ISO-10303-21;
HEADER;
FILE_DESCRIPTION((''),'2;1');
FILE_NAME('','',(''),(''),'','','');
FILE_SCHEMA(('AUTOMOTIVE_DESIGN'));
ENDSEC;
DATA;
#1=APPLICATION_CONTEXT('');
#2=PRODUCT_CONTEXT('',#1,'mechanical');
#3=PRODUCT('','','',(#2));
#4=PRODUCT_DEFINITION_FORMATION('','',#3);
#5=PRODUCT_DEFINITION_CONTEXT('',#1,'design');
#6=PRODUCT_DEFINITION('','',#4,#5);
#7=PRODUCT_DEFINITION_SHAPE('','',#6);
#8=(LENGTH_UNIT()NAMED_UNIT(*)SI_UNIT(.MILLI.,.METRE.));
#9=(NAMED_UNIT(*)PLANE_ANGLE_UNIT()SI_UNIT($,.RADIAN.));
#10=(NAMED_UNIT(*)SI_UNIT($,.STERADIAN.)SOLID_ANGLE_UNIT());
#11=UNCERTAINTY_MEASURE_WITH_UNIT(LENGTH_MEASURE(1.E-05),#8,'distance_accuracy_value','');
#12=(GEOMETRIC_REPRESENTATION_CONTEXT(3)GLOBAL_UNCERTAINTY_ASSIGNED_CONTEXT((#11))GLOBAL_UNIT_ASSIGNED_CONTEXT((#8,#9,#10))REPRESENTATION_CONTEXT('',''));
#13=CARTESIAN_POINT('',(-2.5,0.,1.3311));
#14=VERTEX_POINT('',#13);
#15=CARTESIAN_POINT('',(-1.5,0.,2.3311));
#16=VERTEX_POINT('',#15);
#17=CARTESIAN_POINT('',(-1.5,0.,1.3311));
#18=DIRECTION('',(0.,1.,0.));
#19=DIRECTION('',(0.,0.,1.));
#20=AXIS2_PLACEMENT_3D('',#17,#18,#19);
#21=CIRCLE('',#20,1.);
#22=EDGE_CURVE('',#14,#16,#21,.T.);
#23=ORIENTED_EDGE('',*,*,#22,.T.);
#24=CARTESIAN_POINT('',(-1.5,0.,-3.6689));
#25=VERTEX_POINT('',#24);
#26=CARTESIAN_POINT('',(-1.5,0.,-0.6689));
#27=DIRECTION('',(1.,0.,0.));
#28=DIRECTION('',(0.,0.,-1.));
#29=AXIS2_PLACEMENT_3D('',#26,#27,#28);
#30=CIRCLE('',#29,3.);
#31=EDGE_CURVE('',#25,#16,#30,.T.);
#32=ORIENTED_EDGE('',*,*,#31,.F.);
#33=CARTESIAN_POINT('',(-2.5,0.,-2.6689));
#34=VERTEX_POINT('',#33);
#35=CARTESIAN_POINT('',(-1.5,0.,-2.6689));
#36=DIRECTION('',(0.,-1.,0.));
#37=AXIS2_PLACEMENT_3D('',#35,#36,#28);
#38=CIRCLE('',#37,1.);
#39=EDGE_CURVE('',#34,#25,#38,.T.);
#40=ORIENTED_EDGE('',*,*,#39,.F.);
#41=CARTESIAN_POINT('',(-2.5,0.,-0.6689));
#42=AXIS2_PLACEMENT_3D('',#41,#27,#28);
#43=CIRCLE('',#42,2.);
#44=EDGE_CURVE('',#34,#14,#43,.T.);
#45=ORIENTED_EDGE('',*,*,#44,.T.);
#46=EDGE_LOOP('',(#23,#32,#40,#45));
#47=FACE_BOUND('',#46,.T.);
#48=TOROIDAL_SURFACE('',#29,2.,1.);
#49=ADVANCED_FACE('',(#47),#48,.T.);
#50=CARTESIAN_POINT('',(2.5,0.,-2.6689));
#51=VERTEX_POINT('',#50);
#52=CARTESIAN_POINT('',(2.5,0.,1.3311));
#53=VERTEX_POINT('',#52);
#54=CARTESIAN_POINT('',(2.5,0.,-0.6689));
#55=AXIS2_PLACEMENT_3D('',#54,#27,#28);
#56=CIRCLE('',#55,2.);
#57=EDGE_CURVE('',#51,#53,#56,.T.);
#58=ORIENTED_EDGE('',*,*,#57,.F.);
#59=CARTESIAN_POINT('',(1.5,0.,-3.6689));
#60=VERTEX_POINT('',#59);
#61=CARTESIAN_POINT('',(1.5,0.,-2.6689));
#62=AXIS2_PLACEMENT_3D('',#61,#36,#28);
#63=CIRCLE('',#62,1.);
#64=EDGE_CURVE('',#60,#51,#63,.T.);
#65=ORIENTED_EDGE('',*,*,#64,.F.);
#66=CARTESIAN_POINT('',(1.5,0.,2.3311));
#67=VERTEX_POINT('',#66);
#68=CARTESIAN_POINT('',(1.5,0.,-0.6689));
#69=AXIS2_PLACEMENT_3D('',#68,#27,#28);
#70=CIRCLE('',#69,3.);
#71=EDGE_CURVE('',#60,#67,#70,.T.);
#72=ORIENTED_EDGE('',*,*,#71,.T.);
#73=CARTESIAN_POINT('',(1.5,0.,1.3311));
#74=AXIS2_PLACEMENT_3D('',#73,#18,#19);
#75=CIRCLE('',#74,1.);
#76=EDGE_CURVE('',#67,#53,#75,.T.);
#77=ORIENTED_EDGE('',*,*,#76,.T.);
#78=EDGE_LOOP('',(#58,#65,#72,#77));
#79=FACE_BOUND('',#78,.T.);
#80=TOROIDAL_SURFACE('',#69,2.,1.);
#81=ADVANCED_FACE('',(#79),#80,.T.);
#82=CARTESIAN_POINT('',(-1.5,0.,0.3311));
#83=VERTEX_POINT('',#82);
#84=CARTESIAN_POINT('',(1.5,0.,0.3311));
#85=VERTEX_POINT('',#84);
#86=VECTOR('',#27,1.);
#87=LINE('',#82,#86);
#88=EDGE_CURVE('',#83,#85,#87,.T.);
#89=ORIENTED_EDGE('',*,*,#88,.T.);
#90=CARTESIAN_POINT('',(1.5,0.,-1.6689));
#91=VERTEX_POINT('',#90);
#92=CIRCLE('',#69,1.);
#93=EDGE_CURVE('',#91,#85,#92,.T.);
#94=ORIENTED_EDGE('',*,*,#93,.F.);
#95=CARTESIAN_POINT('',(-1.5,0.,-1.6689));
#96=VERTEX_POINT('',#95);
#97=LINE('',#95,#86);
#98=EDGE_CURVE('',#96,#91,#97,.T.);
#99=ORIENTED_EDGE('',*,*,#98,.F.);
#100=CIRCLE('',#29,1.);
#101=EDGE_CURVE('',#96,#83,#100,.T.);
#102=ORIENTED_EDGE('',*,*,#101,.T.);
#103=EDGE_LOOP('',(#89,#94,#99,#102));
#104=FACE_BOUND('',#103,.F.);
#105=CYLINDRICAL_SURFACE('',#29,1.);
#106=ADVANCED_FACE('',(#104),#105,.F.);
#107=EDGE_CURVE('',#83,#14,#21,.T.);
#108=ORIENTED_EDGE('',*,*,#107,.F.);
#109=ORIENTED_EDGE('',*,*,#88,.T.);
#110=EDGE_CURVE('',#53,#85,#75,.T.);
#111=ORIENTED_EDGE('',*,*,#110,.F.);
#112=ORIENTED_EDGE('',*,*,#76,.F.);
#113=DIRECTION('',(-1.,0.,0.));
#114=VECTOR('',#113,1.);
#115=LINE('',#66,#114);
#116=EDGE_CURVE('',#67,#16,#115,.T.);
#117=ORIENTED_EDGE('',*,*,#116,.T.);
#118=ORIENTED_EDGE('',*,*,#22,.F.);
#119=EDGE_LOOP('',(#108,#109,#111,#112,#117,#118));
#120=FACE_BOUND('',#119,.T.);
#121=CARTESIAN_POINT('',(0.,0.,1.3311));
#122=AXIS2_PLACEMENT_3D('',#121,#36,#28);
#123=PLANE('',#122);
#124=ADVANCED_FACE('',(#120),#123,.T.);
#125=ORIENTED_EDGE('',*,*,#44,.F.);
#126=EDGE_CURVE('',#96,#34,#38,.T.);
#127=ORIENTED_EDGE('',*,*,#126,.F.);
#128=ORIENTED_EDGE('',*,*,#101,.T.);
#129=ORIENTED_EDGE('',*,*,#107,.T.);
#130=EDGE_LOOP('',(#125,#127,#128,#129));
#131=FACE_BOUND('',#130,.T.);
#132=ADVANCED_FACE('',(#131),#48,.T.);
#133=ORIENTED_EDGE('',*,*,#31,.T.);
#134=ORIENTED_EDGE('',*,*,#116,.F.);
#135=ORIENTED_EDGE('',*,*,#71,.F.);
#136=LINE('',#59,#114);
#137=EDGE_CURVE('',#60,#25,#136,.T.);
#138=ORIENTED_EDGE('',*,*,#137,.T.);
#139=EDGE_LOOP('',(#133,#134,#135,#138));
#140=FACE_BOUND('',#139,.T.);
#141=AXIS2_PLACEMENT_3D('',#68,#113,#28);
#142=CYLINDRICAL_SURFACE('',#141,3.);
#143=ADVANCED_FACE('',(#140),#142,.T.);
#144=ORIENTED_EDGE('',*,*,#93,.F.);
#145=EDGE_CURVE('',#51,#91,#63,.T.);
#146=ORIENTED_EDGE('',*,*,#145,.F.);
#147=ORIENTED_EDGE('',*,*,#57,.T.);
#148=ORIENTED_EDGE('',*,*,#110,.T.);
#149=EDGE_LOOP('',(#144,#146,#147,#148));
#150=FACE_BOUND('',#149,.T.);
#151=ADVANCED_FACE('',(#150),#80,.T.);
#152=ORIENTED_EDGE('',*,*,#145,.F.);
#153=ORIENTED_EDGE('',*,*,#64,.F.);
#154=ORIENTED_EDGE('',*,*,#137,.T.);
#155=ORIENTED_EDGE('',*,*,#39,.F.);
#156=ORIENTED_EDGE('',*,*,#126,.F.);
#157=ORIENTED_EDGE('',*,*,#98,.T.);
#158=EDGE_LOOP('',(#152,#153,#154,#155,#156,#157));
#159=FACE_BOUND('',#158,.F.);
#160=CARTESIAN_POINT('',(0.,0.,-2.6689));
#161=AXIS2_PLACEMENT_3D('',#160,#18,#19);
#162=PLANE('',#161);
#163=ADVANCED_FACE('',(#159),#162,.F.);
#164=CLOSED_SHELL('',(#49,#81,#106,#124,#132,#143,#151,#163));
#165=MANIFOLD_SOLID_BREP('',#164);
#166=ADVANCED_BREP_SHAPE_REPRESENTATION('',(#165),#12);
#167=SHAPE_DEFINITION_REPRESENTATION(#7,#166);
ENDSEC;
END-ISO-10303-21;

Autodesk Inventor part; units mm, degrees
ref_plane "YZ Plane" through (0, 0, 0) normal (1, 0, 0) x (0, 1, 0)
ref_plane "XZ Plane" through (0, 0, 0) normal (0, 1, 0) x (-1, 0, 0)
ref_plane "XY Plane" through (0, 0, 0) normal (0, 0, 1) x (1, 0, 0)
sketch "Sketch1" plane through (0, 0, 0) normal (0, 1, 0) x (-1, 0, 0)
  line L0 (1.5, -1.6689) -> (-1.5, -1.6689)
  line L1 (-1.5, -3.6689) -> (1.5, -3.6689)
  arc A0 (2.5, -2.6689) -> (1.5, -1.6689) centre (1.5, -2.6689) ccw
  arc A1 (1.5, -3.6689) -> (2.5, -2.6689) centre (1.5, -2.6689) ccw
  arc A2 (-2.5, -2.6689) -> (-1.5, -3.6689) centre (-1.5, -2.6689) ccw
  arc A3 (-1.5, -1.6689) -> (-2.5, -2.6689) centre (-1.5, -2.6689) ccw
  line L2 (1.5, -2.6689) -> (-1.5, -2.6689) construction
  point P0 (2.5, -1.6689)
  point P1 (-2.5, -3.6689)
  point P2 (2.5, -3.6689)
  point P3 (-2.5, -2.6689)
  dimension "d1" = 5
  dimension "d2" = 2
  dimension "d3" = 1
  dimension "d4" = 1
sketch "Sketch2" plane through (0, 0, 0) normal (1, 0, 0) x (0, 1, 0)
  line L0 (0, -2.6689) -> (0, 1.3311) construction
  arc A0 (0, -2.6689) -> (0, 1.3311) centre (0, -0.6689) ccw
  point P0 (0, 0)
  dimension "d5" = 4
sweep "Sweep1" add profiles "Sketch1" path "Sketch2"
properties part number "seguro"
